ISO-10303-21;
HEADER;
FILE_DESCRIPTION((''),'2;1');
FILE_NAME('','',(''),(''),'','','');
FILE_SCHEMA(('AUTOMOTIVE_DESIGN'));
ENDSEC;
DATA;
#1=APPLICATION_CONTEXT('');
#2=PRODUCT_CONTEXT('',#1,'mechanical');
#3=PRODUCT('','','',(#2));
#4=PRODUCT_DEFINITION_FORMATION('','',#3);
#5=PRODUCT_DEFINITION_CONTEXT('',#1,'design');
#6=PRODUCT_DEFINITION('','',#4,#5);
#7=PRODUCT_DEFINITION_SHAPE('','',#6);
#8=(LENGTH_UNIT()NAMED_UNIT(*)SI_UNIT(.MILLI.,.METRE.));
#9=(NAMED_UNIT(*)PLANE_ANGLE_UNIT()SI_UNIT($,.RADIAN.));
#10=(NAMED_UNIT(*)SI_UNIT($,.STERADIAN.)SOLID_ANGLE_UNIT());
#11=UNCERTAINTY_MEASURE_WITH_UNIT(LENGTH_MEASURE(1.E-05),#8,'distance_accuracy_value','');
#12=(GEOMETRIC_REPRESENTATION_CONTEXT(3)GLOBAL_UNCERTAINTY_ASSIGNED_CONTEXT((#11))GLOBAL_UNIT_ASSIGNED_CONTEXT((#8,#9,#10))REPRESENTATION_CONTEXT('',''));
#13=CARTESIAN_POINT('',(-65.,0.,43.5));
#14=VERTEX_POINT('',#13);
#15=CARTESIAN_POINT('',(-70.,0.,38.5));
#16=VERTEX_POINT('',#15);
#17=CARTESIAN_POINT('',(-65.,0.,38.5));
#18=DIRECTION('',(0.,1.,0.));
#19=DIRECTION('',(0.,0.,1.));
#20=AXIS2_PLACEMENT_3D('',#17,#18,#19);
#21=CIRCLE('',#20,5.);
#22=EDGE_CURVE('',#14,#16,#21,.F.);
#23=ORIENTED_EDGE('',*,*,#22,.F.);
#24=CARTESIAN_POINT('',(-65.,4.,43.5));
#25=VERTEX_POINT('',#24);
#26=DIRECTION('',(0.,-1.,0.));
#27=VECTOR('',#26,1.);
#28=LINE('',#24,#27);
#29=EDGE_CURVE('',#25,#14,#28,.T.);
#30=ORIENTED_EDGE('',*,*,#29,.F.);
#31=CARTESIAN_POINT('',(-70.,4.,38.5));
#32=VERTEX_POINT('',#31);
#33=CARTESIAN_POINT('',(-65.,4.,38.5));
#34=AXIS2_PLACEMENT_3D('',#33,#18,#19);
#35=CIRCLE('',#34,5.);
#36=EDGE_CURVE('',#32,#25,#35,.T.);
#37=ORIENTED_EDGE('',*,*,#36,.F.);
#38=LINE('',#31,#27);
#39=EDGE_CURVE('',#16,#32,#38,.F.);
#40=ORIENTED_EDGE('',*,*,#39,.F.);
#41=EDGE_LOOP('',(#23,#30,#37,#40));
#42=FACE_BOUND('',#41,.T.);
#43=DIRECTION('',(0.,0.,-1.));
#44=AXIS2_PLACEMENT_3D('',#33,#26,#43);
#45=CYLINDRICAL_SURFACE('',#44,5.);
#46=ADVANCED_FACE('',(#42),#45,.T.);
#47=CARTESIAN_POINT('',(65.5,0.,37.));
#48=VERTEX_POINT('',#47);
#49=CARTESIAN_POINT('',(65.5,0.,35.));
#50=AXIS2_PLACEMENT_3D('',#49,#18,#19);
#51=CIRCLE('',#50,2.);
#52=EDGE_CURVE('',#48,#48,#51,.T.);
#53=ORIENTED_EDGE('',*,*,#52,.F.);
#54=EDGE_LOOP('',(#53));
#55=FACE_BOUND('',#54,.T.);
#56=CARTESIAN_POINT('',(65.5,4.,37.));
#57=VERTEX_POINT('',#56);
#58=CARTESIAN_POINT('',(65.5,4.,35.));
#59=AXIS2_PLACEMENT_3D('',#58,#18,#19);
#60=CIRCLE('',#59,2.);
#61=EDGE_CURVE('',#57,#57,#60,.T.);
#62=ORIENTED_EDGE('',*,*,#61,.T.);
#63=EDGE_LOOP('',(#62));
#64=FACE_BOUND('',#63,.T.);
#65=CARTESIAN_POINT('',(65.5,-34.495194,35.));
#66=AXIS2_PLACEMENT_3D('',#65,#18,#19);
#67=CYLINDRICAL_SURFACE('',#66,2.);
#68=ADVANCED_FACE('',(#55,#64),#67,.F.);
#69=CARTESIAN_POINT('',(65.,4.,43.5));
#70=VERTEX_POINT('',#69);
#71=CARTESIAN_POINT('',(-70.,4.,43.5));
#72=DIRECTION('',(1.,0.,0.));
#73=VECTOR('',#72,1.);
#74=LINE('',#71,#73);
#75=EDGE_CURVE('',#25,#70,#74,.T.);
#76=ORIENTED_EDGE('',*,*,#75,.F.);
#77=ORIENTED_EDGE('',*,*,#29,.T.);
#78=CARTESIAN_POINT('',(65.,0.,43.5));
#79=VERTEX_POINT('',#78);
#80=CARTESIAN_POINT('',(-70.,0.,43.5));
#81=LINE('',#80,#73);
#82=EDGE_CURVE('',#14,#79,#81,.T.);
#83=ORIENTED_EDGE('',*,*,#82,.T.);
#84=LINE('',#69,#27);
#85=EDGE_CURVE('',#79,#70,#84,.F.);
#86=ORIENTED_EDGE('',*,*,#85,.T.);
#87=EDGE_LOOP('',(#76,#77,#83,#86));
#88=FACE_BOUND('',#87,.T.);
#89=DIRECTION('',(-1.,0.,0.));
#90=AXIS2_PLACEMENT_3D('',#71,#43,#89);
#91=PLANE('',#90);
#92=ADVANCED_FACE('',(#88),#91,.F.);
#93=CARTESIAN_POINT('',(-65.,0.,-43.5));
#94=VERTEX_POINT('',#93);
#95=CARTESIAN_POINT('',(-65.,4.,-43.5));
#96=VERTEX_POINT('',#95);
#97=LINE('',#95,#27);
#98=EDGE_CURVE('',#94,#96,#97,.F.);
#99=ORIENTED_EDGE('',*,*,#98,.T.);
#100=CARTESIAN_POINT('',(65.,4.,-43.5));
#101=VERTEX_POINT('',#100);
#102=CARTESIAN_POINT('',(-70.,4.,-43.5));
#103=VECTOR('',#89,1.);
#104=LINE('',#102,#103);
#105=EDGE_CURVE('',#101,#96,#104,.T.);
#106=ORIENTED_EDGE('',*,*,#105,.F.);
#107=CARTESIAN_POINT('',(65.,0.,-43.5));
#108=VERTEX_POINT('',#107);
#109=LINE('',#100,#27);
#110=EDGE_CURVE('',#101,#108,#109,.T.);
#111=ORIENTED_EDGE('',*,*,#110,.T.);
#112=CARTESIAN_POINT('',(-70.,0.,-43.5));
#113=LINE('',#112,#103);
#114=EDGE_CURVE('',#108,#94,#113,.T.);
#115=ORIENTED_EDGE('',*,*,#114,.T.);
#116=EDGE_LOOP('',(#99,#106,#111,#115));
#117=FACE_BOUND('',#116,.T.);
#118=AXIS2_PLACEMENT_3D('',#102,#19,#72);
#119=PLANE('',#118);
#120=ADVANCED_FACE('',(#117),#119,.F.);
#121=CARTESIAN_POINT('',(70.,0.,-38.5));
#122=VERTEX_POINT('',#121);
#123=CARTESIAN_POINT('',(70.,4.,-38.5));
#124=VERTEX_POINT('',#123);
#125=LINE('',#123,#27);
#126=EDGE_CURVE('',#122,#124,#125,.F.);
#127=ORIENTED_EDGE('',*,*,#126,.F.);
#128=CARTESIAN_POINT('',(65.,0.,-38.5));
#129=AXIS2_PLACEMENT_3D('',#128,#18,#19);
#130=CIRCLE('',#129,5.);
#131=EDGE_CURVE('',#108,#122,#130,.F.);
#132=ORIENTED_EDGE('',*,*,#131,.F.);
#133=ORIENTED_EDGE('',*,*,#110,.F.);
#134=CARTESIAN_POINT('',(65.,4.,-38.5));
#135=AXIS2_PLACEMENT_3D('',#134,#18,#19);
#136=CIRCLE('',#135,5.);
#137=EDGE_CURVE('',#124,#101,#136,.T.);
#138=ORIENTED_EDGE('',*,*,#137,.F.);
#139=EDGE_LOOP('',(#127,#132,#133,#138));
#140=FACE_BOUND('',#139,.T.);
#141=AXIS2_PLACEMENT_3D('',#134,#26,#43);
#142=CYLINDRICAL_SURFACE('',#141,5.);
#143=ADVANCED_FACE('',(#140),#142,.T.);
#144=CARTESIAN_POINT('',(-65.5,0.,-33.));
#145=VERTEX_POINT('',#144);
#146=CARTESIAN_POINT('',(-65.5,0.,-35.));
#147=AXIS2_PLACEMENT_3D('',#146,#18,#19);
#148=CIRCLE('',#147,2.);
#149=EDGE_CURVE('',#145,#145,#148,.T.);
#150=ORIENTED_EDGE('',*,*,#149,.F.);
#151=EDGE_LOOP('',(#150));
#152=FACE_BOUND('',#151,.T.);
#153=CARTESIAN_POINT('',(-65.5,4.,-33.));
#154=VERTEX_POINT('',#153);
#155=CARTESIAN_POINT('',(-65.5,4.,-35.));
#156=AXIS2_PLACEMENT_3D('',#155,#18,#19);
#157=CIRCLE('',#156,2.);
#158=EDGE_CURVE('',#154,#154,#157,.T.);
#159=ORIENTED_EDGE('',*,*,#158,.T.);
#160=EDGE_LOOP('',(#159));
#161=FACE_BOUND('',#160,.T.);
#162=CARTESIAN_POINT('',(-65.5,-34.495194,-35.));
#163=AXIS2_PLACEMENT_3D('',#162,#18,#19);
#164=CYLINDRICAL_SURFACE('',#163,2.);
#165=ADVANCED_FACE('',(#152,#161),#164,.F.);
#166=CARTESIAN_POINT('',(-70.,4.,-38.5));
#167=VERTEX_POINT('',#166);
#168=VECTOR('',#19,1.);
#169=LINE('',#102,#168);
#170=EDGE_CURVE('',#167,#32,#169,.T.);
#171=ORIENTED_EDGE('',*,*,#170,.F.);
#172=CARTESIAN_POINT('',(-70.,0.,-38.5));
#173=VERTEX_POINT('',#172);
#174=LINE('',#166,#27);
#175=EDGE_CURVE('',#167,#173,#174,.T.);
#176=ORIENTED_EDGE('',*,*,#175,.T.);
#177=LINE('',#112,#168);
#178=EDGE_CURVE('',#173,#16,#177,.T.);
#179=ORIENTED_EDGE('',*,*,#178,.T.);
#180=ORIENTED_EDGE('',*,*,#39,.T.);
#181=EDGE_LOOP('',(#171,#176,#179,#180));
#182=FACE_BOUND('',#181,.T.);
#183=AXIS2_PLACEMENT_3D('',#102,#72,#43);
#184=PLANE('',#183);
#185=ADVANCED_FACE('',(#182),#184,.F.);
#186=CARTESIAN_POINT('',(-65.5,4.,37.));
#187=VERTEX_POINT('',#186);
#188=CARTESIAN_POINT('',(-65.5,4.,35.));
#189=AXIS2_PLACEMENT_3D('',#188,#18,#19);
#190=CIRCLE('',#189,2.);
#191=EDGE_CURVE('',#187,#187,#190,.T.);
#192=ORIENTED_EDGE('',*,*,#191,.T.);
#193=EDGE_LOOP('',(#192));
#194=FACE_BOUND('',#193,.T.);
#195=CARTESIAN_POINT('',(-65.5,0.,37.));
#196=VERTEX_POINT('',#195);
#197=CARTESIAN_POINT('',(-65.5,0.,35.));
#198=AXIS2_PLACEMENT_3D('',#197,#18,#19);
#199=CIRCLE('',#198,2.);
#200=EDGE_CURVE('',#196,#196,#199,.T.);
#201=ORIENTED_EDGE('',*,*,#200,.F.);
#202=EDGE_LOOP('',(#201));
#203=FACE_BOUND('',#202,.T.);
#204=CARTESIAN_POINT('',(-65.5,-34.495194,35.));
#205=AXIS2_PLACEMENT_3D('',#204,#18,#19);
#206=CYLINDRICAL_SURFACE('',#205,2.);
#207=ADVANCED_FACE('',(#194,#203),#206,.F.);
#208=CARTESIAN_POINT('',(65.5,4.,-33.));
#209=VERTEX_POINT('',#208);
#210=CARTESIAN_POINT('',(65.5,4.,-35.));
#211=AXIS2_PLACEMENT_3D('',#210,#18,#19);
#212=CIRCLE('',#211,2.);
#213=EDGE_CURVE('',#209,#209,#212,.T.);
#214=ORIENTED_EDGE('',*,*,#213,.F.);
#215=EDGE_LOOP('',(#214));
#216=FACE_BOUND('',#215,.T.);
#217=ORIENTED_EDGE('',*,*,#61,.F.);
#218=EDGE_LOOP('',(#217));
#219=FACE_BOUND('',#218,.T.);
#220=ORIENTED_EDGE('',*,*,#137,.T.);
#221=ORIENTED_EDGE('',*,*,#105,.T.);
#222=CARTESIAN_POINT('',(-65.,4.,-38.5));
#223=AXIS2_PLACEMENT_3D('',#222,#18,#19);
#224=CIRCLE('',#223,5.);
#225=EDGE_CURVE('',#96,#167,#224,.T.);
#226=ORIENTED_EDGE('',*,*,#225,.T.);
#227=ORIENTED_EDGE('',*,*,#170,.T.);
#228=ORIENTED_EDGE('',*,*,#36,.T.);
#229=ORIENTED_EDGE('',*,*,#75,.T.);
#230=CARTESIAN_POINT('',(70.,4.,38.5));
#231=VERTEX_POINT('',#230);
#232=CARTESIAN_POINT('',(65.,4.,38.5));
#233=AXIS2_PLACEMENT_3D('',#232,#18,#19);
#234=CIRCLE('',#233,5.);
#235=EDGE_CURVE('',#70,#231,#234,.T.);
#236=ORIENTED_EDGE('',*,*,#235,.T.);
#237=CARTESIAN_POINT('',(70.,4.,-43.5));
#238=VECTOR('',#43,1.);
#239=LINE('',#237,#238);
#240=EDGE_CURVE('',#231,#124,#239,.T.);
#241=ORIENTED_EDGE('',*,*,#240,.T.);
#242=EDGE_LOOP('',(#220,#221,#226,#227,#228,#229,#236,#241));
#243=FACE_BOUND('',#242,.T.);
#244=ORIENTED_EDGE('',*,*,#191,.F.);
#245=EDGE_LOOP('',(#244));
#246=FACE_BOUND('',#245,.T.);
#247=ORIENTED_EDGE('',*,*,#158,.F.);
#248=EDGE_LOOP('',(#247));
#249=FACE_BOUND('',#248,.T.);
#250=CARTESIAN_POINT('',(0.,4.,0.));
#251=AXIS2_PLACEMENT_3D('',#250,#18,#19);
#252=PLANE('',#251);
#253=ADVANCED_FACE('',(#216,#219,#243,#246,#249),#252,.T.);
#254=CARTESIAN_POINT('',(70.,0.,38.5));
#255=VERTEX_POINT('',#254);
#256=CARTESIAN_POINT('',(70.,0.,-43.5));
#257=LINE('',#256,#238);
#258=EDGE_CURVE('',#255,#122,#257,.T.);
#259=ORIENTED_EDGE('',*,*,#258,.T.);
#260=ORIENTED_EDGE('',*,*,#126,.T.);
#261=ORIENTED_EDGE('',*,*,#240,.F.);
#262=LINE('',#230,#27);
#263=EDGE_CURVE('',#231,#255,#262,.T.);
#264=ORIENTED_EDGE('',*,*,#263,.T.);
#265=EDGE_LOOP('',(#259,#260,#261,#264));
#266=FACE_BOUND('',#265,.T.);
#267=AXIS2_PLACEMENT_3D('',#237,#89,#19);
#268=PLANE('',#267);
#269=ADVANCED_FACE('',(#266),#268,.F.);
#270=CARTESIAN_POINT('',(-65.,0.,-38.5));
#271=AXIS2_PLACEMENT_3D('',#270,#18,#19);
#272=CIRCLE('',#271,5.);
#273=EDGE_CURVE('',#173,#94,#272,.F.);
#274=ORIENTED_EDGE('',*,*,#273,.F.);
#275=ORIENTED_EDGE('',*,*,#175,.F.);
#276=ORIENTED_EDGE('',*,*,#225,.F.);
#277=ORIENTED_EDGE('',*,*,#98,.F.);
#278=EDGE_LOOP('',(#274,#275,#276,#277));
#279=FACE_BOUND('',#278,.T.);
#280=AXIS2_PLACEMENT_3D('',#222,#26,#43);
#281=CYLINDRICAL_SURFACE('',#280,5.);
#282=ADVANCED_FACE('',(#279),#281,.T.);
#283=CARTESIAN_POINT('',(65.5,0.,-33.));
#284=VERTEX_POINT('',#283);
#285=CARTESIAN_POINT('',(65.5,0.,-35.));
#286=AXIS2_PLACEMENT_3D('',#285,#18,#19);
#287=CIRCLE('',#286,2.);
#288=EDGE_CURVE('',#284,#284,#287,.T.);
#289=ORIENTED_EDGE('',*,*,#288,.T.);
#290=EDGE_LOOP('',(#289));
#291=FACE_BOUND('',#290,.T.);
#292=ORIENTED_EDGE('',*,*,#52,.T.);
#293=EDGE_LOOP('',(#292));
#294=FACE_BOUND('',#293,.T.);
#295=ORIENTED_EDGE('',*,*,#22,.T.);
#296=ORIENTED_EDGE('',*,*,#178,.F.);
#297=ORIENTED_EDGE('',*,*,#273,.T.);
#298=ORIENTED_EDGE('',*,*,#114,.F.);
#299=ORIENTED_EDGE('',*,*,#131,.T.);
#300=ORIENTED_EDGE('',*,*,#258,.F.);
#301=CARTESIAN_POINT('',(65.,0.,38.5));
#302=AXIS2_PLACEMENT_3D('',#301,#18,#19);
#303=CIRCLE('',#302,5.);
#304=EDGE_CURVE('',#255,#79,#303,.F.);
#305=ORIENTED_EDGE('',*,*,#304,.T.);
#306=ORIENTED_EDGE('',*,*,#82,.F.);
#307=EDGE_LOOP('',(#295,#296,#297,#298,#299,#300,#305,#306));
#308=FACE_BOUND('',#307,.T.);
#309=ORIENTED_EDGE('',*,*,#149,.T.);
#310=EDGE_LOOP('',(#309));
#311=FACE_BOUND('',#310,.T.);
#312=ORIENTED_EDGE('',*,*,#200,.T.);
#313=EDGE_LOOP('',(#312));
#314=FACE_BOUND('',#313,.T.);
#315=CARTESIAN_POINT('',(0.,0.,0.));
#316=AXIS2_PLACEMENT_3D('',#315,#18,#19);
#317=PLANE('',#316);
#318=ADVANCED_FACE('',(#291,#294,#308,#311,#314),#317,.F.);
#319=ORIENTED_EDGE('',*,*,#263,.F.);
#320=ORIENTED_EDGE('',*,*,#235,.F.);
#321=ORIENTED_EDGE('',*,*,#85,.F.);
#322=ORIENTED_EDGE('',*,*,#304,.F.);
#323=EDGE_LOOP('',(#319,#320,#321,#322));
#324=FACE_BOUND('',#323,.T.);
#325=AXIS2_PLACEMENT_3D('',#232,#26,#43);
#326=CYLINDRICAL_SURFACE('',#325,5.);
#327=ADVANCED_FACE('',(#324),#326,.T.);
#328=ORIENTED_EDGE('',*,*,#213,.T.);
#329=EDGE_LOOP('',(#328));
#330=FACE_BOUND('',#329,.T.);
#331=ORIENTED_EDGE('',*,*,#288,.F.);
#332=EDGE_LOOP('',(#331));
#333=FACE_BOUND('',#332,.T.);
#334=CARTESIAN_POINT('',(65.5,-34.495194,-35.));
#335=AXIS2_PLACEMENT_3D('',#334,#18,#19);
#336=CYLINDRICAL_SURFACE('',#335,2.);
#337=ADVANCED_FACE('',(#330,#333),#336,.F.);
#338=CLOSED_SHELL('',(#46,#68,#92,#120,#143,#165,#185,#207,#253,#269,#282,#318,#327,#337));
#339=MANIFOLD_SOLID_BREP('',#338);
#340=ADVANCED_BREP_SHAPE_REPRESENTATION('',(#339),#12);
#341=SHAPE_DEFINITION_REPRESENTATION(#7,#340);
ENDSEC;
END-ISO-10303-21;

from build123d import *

# Parameters (mm, degrees)
SKETCH1_W               = 140
SKETCH1_H               = 87
BOSS_EXTRUDE1_DEPTH     = 4
BOSS_EXTRUDE2_START     = -4
BOSS_EXTRUDE2_OUTLINE_R = 2
BOSS_EXTRUDE2_DEPTH     = 4
FILLET1_R               = 5


# Read off the part's stored shape, not the designer's step: Boss-Extrude2
with BuildPart() as part:
    # Sketch1 → Boss-Extrude1 (new body)
    with BuildSketch(Plane(origin=(0, 0, 0), x_dir=(1, 0, 0), z_dir=(0, 1, 0))):
        Rectangle(SKETCH1_W, SKETCH1_H)
    extrude(amount=BOSS_EXTRUDE1_DEPTH)

    # Boss-Extrude2 outline → Boss-Extrude2 (cut)
    with BuildSketch(Plane(origin=(0, 4, 0), x_dir=(1, 0, 0), z_dir=(0, 1, 0)).offset(BOSS_EXTRUDE2_START)):
        with Locations((-65.5, 35)):
            Circle(BOSS_EXTRUDE2_OUTLINE_R)
        with Locations((65.5, -35)):
            Circle(BOSS_EXTRUDE2_OUTLINE_R)
        with Locations((-65.5, -35)):
            Circle(BOSS_EXTRUDE2_OUTLINE_R)
        with Locations((65.5, 35)):
            Circle(BOSS_EXTRUDE2_OUTLINE_R)
    extrude(amount=BOSS_EXTRUDE2_DEPTH, mode=Mode.SUBTRACT)

    # Fillet1
    fillet1_edges = [part.edges().sort_by_distance(p)[0] for p in [
        (70, 2, 43.5),
        (-70, 2, 43.5),
        (-70, 2, -43.5),
        (70, 2, -43.5),
    ]]
    fillet(fillet1_edges, radius=FILLET1_R)


solid = part.part
